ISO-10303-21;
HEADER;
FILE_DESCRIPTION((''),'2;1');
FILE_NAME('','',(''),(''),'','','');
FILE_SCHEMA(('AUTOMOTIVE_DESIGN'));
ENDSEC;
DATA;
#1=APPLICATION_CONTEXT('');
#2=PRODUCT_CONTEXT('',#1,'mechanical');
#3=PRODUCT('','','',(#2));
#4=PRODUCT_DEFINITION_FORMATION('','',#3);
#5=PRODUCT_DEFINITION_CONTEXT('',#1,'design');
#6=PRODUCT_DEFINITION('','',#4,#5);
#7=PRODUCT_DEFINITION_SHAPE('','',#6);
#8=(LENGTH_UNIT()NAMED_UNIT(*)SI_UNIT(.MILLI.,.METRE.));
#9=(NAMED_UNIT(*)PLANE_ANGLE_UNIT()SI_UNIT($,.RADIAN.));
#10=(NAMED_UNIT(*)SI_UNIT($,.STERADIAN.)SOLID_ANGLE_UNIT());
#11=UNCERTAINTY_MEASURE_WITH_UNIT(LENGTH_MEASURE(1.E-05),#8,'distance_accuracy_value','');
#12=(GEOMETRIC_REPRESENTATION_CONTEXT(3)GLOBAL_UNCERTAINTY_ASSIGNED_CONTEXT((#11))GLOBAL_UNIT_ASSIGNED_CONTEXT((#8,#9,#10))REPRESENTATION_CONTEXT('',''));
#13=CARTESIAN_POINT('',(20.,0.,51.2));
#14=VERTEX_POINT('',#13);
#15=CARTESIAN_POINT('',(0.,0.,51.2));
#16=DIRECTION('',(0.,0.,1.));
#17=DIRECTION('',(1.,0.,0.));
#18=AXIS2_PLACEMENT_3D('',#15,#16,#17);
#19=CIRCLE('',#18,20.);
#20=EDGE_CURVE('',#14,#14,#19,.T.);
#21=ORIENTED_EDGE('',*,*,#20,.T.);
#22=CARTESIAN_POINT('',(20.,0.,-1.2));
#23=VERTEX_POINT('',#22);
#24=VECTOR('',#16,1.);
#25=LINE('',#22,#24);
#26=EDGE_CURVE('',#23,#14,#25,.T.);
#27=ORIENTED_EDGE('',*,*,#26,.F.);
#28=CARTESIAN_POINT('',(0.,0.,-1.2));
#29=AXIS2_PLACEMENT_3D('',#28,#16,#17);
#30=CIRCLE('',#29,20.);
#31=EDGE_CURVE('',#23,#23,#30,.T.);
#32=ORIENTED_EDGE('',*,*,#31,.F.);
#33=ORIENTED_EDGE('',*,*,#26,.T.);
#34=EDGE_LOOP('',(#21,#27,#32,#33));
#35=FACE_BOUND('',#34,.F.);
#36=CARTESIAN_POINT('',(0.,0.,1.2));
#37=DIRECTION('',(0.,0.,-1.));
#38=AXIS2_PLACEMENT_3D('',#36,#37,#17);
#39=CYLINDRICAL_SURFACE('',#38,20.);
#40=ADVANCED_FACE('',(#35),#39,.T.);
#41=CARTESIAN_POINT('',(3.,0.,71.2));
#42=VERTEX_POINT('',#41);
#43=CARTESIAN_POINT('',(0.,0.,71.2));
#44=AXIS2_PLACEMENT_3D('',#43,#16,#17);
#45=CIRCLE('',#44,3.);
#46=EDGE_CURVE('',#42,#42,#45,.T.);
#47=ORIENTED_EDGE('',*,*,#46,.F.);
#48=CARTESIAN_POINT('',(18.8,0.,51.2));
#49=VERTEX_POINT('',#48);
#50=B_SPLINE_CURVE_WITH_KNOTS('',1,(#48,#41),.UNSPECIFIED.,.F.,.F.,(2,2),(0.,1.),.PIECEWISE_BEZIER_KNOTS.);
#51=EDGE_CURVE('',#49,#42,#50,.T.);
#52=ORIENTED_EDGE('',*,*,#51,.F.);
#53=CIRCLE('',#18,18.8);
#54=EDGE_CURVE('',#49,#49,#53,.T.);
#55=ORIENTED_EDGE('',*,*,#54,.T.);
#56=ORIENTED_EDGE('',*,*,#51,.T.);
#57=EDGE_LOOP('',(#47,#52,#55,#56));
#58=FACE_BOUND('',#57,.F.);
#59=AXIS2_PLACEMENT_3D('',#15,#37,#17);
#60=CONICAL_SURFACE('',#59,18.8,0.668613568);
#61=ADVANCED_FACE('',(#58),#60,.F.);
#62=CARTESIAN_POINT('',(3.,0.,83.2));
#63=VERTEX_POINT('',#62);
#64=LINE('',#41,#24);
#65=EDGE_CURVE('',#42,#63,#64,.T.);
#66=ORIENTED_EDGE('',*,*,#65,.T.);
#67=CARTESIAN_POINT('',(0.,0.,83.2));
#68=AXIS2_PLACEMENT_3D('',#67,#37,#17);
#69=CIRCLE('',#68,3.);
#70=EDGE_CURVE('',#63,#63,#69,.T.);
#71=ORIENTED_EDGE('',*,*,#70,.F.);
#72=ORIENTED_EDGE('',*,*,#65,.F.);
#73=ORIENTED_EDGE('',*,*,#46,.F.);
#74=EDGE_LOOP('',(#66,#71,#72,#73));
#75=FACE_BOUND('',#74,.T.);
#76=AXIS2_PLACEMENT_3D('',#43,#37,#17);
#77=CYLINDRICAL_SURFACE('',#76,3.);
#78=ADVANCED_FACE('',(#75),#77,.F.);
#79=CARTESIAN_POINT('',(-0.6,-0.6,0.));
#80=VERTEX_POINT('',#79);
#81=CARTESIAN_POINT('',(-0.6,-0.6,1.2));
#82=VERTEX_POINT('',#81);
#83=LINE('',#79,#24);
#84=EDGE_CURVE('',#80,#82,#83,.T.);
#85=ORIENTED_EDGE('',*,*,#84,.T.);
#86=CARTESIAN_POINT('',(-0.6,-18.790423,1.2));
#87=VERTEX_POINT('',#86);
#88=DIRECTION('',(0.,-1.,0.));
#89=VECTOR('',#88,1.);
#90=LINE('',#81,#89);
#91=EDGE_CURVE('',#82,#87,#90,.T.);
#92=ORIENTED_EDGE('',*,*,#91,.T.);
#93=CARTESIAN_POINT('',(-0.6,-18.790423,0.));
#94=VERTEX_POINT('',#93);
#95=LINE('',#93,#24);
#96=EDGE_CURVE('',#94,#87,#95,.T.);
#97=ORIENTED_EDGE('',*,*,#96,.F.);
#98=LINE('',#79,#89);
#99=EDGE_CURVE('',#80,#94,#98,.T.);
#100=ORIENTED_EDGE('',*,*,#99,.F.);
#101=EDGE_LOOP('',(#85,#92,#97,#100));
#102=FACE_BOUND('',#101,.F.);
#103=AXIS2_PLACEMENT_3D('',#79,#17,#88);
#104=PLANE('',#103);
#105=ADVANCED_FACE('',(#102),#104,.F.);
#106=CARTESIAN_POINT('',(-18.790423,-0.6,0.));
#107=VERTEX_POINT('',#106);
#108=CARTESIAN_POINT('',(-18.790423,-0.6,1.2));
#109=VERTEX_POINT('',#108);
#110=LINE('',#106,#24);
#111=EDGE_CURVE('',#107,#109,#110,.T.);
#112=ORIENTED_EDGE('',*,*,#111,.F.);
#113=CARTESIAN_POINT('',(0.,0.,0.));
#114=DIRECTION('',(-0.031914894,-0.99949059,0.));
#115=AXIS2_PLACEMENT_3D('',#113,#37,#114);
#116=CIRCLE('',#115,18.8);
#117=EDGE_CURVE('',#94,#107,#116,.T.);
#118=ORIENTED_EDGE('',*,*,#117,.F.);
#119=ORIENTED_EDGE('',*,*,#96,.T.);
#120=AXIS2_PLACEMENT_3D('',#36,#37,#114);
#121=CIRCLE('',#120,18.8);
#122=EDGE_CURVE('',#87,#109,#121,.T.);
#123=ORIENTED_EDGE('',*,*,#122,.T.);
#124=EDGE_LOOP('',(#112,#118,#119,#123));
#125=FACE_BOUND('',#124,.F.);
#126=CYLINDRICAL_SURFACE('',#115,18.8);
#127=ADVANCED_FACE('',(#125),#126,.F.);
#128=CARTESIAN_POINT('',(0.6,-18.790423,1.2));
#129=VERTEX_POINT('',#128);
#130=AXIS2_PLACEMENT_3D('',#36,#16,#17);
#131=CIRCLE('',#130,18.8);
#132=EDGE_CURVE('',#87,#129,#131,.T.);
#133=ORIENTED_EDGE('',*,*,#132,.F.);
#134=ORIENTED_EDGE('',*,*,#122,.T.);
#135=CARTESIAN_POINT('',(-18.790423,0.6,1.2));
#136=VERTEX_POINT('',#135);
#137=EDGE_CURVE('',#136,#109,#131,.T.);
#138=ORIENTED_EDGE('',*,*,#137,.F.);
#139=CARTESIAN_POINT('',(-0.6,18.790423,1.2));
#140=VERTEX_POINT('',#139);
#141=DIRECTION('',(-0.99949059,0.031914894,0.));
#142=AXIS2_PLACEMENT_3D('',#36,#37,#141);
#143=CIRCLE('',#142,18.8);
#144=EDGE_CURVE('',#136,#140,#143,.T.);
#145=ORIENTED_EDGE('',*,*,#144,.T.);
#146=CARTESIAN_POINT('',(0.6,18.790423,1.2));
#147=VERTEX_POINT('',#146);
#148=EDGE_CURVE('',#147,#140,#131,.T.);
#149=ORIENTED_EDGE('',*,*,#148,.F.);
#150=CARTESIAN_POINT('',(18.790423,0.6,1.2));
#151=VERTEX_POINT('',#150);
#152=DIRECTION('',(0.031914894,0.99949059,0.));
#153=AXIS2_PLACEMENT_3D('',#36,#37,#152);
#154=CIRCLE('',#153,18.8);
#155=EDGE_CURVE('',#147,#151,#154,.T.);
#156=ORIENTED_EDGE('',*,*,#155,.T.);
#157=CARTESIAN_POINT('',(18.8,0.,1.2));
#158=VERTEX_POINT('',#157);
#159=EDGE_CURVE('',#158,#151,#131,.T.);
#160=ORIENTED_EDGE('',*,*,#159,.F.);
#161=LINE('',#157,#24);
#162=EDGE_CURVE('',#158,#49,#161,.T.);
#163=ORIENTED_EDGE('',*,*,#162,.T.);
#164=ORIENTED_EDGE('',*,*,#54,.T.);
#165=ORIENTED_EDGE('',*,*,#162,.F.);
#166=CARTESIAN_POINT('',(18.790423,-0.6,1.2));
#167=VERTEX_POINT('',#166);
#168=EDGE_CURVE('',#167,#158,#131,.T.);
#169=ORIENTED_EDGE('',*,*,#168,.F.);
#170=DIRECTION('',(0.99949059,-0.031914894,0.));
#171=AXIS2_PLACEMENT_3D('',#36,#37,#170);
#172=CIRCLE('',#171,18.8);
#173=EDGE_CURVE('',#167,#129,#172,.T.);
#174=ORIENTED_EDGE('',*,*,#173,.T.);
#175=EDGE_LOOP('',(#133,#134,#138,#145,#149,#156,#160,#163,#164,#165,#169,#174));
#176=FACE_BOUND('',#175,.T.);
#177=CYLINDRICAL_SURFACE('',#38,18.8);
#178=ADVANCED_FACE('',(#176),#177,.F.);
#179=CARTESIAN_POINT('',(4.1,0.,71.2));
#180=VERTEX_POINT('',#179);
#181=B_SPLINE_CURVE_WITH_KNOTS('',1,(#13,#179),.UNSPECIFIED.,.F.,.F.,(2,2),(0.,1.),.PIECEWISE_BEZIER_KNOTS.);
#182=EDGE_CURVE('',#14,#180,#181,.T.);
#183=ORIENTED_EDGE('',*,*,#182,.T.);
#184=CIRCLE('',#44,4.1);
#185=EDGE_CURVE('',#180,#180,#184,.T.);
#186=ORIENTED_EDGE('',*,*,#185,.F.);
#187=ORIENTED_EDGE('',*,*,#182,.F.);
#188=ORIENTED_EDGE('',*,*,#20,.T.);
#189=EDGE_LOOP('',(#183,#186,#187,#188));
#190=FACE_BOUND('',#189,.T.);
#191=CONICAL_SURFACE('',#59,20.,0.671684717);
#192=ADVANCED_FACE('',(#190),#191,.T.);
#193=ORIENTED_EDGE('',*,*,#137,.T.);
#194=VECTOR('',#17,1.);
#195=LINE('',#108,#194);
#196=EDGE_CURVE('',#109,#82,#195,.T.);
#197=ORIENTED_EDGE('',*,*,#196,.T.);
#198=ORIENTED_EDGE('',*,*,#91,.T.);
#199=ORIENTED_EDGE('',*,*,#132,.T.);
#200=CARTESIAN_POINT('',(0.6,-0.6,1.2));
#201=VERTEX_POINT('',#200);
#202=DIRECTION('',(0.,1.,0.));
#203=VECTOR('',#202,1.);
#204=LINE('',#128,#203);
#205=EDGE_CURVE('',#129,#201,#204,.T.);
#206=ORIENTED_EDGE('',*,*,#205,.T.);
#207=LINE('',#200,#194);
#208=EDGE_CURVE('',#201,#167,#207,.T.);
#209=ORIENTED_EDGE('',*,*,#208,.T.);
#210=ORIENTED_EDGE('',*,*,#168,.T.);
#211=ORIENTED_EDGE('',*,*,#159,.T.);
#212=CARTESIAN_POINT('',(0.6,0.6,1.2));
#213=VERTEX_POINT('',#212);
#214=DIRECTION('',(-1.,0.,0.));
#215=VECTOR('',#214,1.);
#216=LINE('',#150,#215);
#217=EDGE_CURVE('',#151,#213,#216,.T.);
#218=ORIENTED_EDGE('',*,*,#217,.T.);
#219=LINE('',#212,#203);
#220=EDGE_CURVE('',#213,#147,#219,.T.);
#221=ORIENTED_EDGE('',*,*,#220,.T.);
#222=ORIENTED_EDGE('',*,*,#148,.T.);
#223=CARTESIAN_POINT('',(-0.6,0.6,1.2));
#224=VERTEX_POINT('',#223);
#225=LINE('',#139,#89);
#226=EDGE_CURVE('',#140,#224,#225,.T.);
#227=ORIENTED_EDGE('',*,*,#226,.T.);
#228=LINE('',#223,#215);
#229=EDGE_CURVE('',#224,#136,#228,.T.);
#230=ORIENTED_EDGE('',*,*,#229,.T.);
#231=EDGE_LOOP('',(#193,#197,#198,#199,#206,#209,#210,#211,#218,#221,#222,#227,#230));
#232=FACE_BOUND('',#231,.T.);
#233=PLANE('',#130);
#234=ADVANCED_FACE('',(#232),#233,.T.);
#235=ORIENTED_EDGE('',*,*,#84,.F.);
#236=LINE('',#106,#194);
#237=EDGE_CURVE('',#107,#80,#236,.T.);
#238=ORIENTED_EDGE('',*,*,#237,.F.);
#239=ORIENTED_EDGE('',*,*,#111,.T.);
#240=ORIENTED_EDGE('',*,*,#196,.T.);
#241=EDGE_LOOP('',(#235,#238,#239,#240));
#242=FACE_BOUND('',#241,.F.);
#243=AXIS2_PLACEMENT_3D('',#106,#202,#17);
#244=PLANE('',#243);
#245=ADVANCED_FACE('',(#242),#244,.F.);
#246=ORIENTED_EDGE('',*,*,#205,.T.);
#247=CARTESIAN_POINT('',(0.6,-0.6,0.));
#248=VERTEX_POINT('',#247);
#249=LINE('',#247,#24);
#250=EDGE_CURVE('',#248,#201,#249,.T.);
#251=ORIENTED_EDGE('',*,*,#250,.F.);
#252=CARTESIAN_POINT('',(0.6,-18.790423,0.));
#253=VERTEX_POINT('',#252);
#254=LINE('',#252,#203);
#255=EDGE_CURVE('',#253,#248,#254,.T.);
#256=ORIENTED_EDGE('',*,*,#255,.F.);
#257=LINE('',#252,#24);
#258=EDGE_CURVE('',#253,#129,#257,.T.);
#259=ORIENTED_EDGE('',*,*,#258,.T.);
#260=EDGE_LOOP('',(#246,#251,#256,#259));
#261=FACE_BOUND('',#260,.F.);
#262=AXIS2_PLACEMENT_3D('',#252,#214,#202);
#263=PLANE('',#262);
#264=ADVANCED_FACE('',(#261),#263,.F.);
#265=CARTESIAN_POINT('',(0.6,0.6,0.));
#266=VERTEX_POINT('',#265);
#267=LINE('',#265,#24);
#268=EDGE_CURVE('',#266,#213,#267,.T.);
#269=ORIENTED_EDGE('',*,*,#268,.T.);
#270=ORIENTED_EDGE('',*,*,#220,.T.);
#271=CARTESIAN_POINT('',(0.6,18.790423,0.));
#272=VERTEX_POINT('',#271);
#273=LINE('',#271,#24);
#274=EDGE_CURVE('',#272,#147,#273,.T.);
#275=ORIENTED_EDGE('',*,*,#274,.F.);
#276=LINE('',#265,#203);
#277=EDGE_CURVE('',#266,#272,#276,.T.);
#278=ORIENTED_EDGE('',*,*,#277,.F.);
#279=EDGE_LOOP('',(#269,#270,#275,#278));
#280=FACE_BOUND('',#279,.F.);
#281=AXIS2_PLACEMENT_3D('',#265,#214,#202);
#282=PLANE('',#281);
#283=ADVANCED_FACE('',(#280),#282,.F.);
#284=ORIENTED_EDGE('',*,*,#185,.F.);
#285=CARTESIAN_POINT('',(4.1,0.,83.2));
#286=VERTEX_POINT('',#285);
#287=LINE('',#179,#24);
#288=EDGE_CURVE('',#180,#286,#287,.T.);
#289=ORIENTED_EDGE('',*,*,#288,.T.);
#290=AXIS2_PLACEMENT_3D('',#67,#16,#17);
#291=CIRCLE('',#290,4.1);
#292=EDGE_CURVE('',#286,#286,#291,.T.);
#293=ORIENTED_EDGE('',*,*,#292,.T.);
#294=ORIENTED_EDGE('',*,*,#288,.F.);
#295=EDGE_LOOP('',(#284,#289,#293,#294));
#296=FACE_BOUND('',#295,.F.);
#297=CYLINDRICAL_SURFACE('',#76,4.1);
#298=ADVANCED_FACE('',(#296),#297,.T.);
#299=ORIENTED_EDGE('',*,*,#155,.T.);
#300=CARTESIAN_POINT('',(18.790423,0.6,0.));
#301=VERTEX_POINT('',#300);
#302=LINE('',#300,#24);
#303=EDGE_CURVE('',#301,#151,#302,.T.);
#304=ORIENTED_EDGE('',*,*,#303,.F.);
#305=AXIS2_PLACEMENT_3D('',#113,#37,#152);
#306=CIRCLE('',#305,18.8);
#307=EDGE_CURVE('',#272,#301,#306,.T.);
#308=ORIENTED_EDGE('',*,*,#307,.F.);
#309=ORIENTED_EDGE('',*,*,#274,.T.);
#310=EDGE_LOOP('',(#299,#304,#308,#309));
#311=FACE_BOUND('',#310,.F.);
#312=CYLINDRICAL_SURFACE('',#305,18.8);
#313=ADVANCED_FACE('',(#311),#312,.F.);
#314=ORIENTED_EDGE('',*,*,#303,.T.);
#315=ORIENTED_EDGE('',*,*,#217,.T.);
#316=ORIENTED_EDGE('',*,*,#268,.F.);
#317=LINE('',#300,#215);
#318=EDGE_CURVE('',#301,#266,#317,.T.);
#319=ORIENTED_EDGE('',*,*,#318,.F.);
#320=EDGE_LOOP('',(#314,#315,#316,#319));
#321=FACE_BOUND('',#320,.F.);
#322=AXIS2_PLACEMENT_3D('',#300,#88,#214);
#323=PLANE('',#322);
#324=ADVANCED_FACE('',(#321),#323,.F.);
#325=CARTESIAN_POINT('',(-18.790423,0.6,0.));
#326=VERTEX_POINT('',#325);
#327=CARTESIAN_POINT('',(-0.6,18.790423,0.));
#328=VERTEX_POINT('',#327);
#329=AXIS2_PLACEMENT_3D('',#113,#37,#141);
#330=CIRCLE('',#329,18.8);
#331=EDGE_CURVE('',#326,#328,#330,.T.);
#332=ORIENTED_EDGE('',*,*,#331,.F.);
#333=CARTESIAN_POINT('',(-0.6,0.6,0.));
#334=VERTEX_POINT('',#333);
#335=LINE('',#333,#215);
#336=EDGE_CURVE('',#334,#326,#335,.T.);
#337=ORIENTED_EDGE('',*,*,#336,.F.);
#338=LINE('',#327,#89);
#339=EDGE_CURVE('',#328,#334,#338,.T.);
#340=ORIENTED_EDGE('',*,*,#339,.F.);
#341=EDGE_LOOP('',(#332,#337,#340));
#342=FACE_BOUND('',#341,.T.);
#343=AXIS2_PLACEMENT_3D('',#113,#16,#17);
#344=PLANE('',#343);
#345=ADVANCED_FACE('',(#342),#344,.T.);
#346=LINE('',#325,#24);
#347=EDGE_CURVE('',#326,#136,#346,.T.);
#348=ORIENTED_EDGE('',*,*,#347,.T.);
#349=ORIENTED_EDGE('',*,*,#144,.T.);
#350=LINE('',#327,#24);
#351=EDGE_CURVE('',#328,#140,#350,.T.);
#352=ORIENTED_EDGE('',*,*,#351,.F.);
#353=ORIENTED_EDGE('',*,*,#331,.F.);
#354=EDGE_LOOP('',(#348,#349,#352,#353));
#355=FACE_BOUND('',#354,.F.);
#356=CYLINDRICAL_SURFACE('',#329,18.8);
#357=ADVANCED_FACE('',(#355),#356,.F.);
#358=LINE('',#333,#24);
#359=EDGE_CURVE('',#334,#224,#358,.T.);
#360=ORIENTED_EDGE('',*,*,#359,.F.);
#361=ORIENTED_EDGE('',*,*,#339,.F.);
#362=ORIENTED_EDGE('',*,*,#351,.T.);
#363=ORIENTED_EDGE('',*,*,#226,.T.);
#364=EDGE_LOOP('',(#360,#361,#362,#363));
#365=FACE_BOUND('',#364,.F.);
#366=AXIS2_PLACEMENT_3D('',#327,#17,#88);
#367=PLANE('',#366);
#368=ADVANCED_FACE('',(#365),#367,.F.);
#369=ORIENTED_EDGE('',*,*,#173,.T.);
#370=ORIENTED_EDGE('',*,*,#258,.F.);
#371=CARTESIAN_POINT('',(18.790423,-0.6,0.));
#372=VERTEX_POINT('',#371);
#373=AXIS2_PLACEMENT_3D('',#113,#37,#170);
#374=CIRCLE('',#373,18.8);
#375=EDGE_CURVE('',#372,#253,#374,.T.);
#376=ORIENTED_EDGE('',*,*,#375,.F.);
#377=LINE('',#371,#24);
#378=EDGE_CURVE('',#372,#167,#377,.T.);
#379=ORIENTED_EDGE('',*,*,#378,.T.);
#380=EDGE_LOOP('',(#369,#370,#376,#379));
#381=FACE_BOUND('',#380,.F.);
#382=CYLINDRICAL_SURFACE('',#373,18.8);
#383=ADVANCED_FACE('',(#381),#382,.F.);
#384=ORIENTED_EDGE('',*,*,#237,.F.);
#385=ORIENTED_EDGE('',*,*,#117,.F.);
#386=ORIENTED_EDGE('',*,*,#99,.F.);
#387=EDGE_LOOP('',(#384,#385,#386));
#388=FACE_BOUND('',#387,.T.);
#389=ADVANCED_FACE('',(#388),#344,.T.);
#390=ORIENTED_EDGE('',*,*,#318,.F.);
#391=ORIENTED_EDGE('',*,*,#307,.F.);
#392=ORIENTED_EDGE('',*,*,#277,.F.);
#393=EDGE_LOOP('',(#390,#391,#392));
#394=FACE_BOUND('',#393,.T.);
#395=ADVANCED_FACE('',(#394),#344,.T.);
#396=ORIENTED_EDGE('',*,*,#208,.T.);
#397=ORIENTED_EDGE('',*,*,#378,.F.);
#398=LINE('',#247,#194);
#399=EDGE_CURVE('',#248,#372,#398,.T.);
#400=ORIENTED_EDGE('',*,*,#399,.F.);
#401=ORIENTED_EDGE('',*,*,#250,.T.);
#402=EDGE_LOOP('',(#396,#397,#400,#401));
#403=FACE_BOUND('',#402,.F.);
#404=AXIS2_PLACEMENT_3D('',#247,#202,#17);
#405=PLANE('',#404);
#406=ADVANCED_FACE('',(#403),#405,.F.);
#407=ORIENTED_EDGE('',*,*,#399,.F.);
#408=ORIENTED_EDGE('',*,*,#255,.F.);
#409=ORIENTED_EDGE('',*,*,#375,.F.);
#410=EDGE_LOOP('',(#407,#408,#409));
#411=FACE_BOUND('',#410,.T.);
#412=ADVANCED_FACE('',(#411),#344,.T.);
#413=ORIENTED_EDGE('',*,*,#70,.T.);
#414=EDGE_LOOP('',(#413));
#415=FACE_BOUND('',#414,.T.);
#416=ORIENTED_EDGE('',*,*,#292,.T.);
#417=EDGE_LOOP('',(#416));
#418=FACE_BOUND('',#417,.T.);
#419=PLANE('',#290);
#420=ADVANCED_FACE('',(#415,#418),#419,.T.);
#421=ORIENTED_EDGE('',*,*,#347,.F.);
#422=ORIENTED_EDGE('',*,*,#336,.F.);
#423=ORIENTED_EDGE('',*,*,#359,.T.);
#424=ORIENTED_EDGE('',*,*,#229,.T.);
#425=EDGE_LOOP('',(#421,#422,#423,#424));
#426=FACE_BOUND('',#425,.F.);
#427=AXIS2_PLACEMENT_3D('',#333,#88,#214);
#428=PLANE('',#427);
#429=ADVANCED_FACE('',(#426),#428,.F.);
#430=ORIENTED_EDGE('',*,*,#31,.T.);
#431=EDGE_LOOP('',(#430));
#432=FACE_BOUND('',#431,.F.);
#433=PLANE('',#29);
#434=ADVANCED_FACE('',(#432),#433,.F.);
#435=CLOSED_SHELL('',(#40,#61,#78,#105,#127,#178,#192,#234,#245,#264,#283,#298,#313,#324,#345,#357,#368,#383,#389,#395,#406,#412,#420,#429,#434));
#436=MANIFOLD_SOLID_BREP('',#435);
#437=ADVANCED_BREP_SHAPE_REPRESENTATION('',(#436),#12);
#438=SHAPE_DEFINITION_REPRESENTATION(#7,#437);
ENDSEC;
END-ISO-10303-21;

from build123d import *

# Parameters (mm, degrees)
F1_R      = 20
F2_DEPTH  = 1.2
F3_R      = 20
F4_DEPTH  = 1.2
F6_R      = 20
F6_R_2    = 18.8
F7_DEPTH  = 50
F9_R      = 20
F11_R     = 4.1
F13_DEPTH = 12
F15_R     = 3
F16_DEPTH = 25
F14_R     = 18.8


# Not quite as in the source:
# - after a boolean that leaves OpenCascade's solid faulty, fix() repairs it


with BuildPart() as f2:
    # F1 (on Top) → F2 (new body)
    with BuildSketch(Plane.XY):
        Circle(F1_R)
        with BuildLine():
            Line((-18.7904230926, -0.6), (-0.6, -0.6))
            Line((-0.6, -0.6), (-0.6, -18.7904230926))
            ThreePointArc((-0.6, -18.7904230926), (-13.2936074863, -13.2936074863), (-18.7904230926, -0.6))
        make_face(mode=Mode.SUBTRACT)
        with BuildLine():
            Line((0.6, -18.7904230926), (0.6, -0.6))
            Line((0.6, -0.6), (18.7904230926, -0.6))
            ThreePointArc((18.7904230926, -0.6), (13.2936074863, -13.2936074863), (0.6, -18.7904230926))
        make_face(mode=Mode.SUBTRACT)
        with BuildLine():
            Line((-0.6, 18.7904230926), (-0.6, 0.6))
            Line((-0.6, 0.6), (-18.7904230926, 0.6))
            ThreePointArc((-18.7904230926, 0.6), (-13.2936074863, 13.2936074863), (-0.6, 18.7904230926))
        make_face(mode=Mode.SUBTRACT)
        with BuildLine():
            Line((18.7904230926, 0.6), (0.6, 0.6))
            Line((0.6, 0.6), (0.6, 18.7904230926))
            ThreePointArc((0.6, 18.7904230926), (13.2936074863, 13.2936074863), (18.7904230926, 0.6))
        make_face(mode=Mode.SUBTRACT)
    extrude(amount=F2_DEPTH)

    # F3 (on Top) → F4 (join)
    with BuildSketch(Plane.XY):
        Circle(F3_R)
    extrude(amount=-F4_DEPTH)

    # F6 (on offset) → F7 (join)
    with BuildSketch(Plane.XY.offset(1.2)):
        Circle(F6_R)
        Circle(F6_R_2, mode=Mode.SUBTRACT)
    extrude(amount=F7_DEPTH)

    add(f2.part.fix(), mode=Mode.REPLACE)

    # F9 (on offset) → F12 section 0
    with BuildSketch(Plane.XY.offset(51.2)):
        Circle(F9_R)
    # F11 (on offset) → F12 section 1
    with BuildSketch(Plane.XY.offset(71.2)):
        Circle(F11_R)
    loft()

    # F13 (add): a face of the model
    f13_faces = [f2.faces().sort_by_distance(p)[0] for p in [
        (0, 0, 71.2),
    ]]
    extrude(f13_faces, amount=F13_DEPTH)

    # F15 (on offset) → F16 (cut)
    with BuildSketch(Plane.XY.offset(71.2)):
        Circle(F15_R)
    extrude(amount=F16_DEPTH, mode=Mode.SUBTRACT)

    # F14 (on offset) → F17 section 0
    with BuildSketch(Plane.XY.offset(51.2)):
        Circle(F14_R)
    # F15 (on offset) → F17 section 1
    with BuildSketch(Plane.XY.offset(71.2)):
        Circle(F15_R)
    loft(mode=Mode.SUBTRACT)


solid = f2.part
